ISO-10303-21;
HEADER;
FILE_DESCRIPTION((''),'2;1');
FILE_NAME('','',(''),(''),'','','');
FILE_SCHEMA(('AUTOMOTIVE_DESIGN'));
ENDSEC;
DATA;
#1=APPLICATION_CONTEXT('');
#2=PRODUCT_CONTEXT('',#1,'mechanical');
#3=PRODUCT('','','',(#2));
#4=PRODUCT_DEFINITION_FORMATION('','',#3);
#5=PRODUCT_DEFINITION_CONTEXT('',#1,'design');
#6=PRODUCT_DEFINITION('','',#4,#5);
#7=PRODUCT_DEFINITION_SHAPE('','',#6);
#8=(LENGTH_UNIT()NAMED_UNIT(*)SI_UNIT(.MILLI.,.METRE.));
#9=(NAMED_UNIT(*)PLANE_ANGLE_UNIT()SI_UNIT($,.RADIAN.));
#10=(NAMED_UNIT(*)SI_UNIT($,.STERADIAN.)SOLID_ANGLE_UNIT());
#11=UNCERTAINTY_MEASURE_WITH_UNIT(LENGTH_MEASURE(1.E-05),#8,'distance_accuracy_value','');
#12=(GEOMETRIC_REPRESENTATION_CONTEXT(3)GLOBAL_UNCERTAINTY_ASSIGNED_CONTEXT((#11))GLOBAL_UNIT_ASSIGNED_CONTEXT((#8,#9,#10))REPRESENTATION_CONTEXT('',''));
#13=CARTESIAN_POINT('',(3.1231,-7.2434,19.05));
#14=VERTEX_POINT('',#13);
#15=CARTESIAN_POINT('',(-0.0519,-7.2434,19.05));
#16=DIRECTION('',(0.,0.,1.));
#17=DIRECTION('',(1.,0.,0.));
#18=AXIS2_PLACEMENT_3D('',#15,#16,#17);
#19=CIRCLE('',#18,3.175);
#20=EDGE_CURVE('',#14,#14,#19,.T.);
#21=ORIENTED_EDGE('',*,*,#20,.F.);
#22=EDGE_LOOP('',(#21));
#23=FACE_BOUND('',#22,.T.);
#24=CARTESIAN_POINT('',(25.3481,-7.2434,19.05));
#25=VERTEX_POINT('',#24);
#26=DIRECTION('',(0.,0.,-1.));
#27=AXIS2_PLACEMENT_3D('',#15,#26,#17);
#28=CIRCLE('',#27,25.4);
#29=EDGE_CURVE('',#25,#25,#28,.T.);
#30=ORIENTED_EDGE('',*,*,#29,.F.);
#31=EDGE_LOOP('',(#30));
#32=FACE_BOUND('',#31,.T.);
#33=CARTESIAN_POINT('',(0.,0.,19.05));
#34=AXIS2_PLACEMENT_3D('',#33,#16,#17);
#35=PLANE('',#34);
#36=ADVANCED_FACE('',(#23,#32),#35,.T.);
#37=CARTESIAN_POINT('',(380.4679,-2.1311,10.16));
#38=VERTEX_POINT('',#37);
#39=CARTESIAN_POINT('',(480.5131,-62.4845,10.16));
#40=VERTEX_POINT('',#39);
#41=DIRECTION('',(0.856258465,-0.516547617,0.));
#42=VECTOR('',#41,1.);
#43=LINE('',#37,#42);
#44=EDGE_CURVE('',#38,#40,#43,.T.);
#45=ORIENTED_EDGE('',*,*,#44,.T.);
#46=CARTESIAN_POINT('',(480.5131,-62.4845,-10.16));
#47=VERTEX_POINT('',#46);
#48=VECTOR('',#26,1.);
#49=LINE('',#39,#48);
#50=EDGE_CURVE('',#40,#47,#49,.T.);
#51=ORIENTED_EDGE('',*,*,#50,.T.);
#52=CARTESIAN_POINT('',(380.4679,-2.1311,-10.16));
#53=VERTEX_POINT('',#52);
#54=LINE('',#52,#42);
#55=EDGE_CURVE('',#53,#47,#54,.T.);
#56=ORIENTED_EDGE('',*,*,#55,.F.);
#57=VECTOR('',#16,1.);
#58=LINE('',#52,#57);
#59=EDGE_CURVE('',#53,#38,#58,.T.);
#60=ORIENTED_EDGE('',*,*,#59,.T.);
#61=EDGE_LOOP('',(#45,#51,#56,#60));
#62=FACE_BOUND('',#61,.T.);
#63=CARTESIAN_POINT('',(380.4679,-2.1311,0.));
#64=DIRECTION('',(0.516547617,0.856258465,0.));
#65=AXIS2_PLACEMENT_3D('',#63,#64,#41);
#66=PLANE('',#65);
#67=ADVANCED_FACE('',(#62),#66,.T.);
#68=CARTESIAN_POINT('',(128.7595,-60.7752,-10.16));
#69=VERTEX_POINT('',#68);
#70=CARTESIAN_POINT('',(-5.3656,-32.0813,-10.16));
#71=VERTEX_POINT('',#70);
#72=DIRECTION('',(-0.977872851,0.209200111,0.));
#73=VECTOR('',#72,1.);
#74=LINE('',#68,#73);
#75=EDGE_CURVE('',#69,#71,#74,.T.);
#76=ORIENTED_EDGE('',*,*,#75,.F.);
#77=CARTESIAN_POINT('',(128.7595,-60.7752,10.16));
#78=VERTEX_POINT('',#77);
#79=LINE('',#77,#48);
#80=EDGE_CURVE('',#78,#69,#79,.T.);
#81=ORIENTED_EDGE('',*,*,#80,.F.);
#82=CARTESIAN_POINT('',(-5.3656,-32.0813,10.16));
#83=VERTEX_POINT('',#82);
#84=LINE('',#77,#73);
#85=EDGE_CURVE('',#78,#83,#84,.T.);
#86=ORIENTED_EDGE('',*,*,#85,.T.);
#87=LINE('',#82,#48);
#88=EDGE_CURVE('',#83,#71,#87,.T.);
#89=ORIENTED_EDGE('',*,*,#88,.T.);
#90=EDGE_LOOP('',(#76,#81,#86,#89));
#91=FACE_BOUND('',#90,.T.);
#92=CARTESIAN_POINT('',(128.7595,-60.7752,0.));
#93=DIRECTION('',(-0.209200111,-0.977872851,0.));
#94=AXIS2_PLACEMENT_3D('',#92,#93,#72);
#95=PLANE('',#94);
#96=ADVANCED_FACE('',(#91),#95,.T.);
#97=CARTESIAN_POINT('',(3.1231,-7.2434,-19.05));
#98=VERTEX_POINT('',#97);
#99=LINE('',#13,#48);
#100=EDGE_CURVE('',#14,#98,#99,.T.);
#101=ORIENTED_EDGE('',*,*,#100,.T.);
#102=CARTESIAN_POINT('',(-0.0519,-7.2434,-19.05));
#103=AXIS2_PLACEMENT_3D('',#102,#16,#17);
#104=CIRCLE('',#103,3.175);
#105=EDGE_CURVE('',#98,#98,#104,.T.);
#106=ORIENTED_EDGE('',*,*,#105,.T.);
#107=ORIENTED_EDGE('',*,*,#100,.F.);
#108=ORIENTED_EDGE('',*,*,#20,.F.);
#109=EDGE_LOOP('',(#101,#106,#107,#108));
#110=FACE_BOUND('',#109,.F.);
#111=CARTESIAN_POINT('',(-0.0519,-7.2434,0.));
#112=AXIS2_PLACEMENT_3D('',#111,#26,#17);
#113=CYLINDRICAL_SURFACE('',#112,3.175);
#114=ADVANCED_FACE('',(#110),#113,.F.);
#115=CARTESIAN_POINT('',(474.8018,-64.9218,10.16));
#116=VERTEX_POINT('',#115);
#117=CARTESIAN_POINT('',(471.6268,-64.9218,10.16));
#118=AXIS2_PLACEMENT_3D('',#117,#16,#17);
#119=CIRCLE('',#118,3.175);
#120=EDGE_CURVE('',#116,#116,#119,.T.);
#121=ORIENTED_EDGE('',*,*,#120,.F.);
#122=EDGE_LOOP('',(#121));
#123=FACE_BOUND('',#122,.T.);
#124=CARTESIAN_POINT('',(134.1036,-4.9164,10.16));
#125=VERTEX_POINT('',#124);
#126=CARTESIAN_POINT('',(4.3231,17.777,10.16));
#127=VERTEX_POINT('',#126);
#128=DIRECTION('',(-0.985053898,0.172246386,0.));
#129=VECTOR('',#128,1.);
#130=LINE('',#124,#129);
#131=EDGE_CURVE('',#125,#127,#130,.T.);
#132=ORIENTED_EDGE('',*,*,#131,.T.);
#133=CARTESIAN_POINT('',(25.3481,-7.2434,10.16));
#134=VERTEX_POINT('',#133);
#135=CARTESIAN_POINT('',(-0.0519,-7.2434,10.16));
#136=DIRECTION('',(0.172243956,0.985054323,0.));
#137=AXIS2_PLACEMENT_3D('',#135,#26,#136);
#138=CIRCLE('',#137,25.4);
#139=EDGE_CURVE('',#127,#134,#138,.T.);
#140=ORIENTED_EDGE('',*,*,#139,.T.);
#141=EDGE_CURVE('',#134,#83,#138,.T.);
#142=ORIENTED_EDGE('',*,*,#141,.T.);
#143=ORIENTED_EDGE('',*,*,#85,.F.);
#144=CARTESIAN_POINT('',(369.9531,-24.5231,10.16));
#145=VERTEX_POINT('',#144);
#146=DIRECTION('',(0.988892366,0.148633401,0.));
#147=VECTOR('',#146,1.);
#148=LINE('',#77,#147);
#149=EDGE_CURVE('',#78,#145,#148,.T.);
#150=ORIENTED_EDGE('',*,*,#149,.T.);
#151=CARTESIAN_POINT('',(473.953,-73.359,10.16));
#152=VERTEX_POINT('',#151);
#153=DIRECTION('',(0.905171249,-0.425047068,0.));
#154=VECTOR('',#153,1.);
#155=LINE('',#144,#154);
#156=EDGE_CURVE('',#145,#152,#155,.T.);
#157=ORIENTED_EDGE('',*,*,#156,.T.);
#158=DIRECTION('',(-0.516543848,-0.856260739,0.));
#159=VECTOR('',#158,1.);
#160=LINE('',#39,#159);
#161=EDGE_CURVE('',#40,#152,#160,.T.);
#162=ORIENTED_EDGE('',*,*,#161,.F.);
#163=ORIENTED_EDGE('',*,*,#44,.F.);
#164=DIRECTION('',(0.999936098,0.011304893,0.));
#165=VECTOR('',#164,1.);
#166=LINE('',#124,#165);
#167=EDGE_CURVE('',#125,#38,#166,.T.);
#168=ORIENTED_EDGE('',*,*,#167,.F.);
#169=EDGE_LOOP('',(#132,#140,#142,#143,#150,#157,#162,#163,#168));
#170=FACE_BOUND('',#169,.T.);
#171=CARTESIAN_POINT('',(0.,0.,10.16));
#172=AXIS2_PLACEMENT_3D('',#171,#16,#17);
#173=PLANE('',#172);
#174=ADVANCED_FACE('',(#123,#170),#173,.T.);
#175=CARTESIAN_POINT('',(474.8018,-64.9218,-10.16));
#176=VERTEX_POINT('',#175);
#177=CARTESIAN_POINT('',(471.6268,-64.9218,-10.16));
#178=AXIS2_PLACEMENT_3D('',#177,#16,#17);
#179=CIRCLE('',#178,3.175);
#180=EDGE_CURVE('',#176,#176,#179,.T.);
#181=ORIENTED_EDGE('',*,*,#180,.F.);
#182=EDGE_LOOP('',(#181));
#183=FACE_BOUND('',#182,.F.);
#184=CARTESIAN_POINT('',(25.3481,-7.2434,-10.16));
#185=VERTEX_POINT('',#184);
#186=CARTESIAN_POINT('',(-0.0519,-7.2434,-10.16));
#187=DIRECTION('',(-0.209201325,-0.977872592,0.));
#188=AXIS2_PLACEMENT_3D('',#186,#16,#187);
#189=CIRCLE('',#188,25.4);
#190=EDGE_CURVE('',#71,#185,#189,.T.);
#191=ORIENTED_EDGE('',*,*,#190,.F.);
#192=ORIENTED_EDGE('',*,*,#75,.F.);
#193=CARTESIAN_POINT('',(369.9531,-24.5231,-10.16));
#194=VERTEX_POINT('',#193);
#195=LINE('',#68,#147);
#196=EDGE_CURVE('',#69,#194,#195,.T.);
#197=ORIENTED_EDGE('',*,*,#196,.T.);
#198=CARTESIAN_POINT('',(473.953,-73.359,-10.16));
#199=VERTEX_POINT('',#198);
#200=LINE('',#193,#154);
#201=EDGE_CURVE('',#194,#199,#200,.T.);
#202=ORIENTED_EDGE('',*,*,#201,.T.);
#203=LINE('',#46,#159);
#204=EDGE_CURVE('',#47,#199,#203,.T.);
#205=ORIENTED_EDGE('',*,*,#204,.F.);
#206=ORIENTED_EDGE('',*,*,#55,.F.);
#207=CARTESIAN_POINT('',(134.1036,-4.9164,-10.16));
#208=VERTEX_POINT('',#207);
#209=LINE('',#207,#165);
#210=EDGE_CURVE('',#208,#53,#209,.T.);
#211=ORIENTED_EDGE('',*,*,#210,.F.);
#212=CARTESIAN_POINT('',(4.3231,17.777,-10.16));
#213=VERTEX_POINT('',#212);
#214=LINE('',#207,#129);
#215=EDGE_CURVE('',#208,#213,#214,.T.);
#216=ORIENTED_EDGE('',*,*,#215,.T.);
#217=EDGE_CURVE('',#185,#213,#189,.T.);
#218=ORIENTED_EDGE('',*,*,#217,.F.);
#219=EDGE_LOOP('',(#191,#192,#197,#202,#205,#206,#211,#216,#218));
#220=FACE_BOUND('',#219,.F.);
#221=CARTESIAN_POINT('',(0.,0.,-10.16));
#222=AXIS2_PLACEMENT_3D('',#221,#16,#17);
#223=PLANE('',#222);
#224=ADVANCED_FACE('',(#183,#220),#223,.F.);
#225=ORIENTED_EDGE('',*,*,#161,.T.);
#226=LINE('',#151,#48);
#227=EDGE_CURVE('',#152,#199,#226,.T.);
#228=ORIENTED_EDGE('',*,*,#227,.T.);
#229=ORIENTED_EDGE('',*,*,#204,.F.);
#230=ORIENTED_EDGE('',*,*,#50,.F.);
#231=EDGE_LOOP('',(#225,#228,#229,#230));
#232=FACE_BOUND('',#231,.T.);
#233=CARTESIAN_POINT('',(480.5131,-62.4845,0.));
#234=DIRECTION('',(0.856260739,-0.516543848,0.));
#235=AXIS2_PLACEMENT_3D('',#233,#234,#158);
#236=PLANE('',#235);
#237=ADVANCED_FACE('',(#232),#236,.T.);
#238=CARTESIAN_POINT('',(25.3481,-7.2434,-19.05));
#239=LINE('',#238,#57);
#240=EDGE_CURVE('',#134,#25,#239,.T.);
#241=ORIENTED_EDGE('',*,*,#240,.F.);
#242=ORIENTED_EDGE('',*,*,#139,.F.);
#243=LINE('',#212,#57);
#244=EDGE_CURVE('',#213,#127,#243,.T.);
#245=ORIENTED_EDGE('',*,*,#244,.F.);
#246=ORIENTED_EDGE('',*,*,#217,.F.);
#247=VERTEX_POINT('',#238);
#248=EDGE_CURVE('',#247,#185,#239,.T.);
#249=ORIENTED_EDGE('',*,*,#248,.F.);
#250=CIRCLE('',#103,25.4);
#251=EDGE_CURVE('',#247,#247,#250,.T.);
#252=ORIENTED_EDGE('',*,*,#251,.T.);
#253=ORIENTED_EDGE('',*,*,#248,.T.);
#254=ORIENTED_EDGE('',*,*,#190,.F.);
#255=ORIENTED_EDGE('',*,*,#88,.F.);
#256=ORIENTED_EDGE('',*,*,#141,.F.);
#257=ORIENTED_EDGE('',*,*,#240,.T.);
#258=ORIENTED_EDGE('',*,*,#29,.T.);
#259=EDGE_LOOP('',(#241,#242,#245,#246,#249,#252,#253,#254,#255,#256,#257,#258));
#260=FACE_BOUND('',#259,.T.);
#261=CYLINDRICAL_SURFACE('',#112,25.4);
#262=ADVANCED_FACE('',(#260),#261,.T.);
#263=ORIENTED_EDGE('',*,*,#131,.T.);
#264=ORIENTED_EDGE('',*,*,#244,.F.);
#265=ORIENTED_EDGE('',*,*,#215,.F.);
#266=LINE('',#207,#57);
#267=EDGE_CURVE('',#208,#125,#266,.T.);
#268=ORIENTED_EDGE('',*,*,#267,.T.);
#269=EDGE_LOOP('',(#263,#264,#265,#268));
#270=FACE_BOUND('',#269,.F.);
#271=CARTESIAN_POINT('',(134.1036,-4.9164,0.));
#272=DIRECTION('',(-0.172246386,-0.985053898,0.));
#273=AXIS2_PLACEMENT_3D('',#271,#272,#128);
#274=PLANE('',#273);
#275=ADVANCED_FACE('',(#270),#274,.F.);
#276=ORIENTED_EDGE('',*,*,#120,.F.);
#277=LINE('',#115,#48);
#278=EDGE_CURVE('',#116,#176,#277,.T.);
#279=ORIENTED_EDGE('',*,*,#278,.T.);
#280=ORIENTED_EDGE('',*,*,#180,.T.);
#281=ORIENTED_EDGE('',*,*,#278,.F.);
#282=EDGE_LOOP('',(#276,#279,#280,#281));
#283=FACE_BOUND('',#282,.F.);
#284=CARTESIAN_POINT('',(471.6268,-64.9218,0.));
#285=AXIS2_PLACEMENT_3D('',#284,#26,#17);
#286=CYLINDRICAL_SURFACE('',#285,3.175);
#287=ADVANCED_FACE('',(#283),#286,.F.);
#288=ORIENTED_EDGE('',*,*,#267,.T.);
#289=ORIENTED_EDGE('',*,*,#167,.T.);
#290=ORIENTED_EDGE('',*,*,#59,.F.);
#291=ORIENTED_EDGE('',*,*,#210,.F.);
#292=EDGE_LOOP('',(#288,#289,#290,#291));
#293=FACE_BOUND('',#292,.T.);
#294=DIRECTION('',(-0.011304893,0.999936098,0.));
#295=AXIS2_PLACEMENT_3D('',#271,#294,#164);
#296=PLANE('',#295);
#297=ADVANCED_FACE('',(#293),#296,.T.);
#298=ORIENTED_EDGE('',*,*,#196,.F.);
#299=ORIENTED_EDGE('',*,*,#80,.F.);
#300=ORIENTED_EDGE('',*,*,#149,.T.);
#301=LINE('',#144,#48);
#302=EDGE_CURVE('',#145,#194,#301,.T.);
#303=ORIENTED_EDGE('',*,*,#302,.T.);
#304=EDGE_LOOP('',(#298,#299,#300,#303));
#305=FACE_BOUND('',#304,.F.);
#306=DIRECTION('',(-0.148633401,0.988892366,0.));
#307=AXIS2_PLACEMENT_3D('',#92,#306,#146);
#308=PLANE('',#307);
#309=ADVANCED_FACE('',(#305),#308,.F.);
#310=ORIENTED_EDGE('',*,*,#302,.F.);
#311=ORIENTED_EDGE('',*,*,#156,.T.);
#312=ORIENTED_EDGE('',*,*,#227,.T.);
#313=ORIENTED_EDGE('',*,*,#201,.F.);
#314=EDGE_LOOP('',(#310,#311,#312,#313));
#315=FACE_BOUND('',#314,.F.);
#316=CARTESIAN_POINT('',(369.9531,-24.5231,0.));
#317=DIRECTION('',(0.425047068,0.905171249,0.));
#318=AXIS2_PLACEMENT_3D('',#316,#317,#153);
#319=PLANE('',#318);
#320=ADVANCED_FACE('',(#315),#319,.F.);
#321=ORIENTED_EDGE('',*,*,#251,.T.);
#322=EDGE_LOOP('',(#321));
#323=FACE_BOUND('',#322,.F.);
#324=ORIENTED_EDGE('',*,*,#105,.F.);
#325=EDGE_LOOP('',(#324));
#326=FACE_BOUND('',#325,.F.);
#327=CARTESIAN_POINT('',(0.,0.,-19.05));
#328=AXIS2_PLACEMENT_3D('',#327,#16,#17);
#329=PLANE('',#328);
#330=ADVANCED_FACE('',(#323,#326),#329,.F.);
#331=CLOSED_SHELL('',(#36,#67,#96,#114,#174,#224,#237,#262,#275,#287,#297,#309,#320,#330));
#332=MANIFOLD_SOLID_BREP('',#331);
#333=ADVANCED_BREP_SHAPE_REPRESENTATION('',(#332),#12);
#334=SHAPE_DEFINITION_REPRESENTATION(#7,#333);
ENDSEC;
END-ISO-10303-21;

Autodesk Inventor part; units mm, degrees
ref_plane "YZ Plane" through (0, 0, 0) normal (1, 0, 0) x (0, 1, 0)
ref_plane "XZ Plane" through (0, 0, 0) normal (0, 1, 0) x (-1, 0, 0)
ref_plane "XY Plane" through (0, 0, 0) normal (0, 0, 1) x (1, 0, 0)
sketch "Sketch1" plane through (0, 0, 0) normal (0, 0, 1) x (1, 0, 0)
  line L0 (131.4017, -33.1581) -> (234.4053, -26.2304) construction
  line L1 (375.2105, -13.3271) -> (477.233, -67.9218) construction
  line L2 (380.4679, -2.1311) -> (480.5131, -62.4845)
  line L3 (480.5131, -62.4845) -> (473.953, -73.359)
  line L4 (369.9531, -24.5231) -> (473.953, -73.359)
  line L5 (380.4679, -2.1311) -> (369.9531, -24.5231) construction
  line L6 (128.7595, -60.7752) -> (134.1036, -4.9164) construction
  line L7 (128.7595, -60.7752) -> (-5.3656, -32.0813)
  circle A0 centre (-0.0519, -7.2434) radius 25.4
  line L8 (134.1036, -4.9164) -> (4.3231, 17.777)
  line L9 (131.4017, -33.1581) -> (-0.0519, -7.2434) construction
  line L10 (265.3565, -22.0515) -> (375.2105, -13.3271) construction
  line L11 (134.1036, -4.9164) -> (380.4679, -2.1311)
  line L12 (128.7595, -60.7752) -> (369.9531, -24.5231)
  circle A1 centre (471.6268, -64.9218) radius 3.175
  circle A2 centre (-0.0519, -7.2434) radius 3.175
  point P0 (0, 0)
  dimension "d4" = 148
  dimension "d5" = 50.8
  dimension "d6" = 24.7379
  dimension "d7" = 165
  dimension "d8" = 4.7
  dimension "d9" = 3.2
  dimension "d10" = 137.16
  dimension "d11" = 246.38
  dimension "d12" = 116.84
  dimension "d13" = 12.7
  dimension "d14" = 6.35
  dimension "d15" = 6.35
  dimension "d16" = 6.35
extrude "Extrusion1" add sketch "Sketch1" along normal mid plane 20.32 contours L2 L3 L4 L12 L7 A0 L8 L11
extrude "Extrusion2" add sketch "Sketch1" along normal mid plane 38.1 contours A0
properties part number "forearm"
